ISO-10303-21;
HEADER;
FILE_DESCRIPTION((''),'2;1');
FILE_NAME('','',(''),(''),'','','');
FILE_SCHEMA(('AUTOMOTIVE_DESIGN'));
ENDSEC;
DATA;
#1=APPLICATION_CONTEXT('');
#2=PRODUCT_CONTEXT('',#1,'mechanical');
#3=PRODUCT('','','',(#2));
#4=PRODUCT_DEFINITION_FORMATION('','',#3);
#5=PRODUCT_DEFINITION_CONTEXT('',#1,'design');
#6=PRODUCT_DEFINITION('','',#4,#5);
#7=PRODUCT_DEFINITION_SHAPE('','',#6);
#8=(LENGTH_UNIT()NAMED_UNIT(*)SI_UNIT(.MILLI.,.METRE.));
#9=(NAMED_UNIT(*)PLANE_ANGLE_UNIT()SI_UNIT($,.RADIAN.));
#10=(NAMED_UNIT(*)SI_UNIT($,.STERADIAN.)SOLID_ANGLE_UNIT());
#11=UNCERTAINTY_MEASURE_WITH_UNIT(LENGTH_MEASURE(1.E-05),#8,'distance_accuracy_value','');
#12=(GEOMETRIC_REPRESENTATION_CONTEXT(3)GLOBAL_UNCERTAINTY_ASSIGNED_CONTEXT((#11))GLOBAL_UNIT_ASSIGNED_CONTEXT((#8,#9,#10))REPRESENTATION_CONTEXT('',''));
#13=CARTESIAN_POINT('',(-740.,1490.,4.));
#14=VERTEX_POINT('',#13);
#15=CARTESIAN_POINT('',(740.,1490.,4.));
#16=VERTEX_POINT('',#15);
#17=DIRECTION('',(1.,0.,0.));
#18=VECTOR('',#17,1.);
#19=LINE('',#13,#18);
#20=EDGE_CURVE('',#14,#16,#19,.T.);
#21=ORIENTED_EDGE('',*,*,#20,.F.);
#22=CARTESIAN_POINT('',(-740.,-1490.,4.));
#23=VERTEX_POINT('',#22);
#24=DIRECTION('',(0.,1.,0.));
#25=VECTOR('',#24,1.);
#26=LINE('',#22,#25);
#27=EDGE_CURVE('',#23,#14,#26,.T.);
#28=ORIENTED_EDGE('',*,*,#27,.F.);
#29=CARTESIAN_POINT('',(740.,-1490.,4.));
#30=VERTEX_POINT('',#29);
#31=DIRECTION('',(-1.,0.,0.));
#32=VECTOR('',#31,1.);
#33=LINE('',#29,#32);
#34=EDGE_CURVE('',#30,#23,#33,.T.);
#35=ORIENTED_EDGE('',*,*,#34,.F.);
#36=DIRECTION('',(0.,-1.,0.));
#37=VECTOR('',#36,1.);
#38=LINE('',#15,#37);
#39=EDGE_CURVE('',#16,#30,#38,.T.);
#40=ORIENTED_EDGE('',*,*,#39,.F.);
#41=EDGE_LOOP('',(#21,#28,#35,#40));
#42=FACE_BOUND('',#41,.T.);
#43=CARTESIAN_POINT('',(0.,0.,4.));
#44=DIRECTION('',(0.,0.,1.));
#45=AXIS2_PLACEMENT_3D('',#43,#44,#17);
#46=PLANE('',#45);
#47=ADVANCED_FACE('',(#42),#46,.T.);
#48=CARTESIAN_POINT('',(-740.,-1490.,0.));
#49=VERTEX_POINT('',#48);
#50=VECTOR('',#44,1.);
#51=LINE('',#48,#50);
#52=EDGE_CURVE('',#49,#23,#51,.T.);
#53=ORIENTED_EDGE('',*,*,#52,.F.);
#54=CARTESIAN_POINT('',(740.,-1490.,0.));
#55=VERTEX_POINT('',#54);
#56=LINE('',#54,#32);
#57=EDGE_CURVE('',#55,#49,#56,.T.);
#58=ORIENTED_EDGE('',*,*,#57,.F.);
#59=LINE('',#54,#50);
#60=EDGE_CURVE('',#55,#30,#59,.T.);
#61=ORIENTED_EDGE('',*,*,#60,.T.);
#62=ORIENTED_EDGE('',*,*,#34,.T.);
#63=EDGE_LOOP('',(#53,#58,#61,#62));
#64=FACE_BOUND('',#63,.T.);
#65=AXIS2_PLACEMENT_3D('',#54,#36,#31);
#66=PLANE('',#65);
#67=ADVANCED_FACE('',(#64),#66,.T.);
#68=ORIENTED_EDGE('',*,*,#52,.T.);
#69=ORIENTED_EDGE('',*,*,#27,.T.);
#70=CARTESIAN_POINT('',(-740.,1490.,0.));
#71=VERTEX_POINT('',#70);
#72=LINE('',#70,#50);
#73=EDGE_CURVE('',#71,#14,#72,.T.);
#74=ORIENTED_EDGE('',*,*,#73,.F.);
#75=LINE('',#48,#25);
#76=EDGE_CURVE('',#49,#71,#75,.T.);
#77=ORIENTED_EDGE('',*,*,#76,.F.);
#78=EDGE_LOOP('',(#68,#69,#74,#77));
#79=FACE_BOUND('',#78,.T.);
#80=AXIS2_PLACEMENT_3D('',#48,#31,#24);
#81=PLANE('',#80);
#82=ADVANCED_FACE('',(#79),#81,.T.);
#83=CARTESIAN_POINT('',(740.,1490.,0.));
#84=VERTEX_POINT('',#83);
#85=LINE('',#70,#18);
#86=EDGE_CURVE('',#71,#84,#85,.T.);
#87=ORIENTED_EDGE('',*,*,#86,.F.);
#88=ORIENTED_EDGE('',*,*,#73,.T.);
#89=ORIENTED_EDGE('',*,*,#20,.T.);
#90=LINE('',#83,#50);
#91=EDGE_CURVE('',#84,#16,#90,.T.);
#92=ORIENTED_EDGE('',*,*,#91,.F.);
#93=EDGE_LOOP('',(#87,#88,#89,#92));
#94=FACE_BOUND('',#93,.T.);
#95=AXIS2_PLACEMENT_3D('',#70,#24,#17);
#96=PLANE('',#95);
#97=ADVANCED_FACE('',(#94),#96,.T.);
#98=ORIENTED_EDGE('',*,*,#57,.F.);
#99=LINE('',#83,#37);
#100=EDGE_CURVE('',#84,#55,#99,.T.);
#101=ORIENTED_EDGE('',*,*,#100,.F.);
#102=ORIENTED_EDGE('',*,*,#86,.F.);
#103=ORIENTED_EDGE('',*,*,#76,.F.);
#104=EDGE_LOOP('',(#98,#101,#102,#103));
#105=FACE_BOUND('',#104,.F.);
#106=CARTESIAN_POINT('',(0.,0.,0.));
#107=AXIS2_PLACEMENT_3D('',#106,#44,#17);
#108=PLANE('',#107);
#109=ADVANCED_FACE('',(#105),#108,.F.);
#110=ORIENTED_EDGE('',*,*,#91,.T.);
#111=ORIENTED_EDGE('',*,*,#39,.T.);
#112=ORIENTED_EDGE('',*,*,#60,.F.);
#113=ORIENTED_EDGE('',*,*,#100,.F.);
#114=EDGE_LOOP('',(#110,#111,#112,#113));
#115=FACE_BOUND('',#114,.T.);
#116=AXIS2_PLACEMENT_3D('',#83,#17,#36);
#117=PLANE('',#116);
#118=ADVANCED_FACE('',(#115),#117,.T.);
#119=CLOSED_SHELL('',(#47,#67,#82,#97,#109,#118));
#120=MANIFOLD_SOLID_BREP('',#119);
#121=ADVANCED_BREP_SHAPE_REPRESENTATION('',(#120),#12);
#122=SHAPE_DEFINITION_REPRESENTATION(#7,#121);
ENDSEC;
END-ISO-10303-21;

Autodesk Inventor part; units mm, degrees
ref_plane "YZ Plane" through (0, 0, 0) normal (1, 0, 0) x (0, 1, 0)
ref_plane "XZ Plane" through (0, 0, 0) normal (0, 1, 0) x (-1, 0, 0)
ref_plane "XY Plane" through (0, 0, 0) normal (0, 0, 1) x (1, 0, 0)
sketch "Sketch1" plane through (0, 0, 0) normal (0, 0, 1) x (1, 0, 0)
  line L0 (740, -1490) -> (-740, -1490)
  line L1 (-740, -1490) -> (-740, 1490)
  line L2 (-740, 1490) -> (740, 1490)
  line L3 (740, 1490) -> (740, -1490)
  line L4 (740, -1490) -> (-740, 1490) construction
  line L5 (-740, -1490) -> (740, 1490) construction
  point P0 (0, 0)
  dimension "d0" = 1480
  dimension "d1" = 2980
extrude "Plate1" add sketch "Sketch1" along normal blind 4
sketch "Эскиз2" plane through (0, 0, 4) normal (0, 0, 1) x (1, 0, 0)
  line L0 (-500.3754, 1312.2758) -> (-500.3754, 1810.412) construction
  line L1 (-500.3754, 1810.412) -> (-460.7482, 1810.412) construction
  line L2 (-460.7482, 1810.412) -> (-460.7482, 1312.2758) construction
  line L3 (-460.7482, 1312.2758) -> (-500.3754, 1312.2758) construction
  line L4 (-689.2413, 1238) -> (-689.2413, 1335) projected
  line L5 (-689.2413, 1335) -> (-685.2413, 1335) projected
  line L6 (-189.3681, 1238) -> (-189.3681, 1335) projected
  line L7 (-189.3681, 1335) -> (-185.3681, 1335) projected
  line L8 (310.5051, 1238) -> (310.5051, 1335) projected
  line L9 (310.5051, 1335) -> (314.5051, 1335) projected
  line L10 (-689.2413, -1460.5) -> (-689.2413, -1520.5) projected
  line L11 (-689.2413, -1460.5) -> (-685.2413, -1460.5) projected
  line L12 (-189.3681, -1460.5) -> (-189.3681, -1520.5) projected
  line L13 (-189.3681, -1460.5) -> (-185.3681, -1460.5) projected
  line L14 (310.5051, -1460.5) -> (310.5051, -1520.5) projected
  line L15 (310.5051, -1460.5) -> (314.5051, -1460.5) projected
  line L16 (-709.6246, 1234.5) -> (-769.6246, 1234.5) projected
  line L17 (-709.6246, 1234.5) -> (-709.6246, 1230.5) projected
  line L18 (-709.6246, 737.8333) -> (-769.6246, 737.8333) projected
  line L19 (-709.6246, 737.8333) -> (-709.6246, 733.8333) projected
  line L20 (-709.6246, 241.1667) -> (-769.6246, 241.1667) projected
  line L21 (-709.6246, 241.1667) -> (-709.6246, 237.1667) projected
  line L22 (-709.6246, -255.5) -> (-769.6246, -255.5) projected
  line L23 (-709.6246, -255.5) -> (-709.6246, -259.5) projected
  line L24 (-709.6246, -752.1667) -> (-769.6246, -752.1667) projected
  line L25 (-709.6246, -752.1667) -> (-709.6246, -756.1667) projected
  line L26 (-709.6246, -1248.8333) -> (-769.6246, -1248.8333) projected
  line L27 (-709.6246, -1248.8333) -> (-709.6246, -1252.8333) projected
  line L28 (740, 1234.5) -> (710, 1234.5) projected
  line L29 (710, 1234.5) -> (710, 1230.5) projected
  line L30 (740, 737.8333) -> (710, 737.8333) projected
  line L31 (710, 737.8333) -> (710, 733.8333) projected
  line L32 (740, 241.1667) -> (710, 241.1667) projected
  line L33 (710, 241.1667) -> (710, 237.1667) projected
  line L34 (740, -255.5) -> (710, -255.5) projected
  line L35 (710, -255.5) -> (710, -259.5) projected
  line L36 (740, -752.1667) -> (710, -752.1667) projected
  line L37 (710, -752.1667) -> (710, -756.1667) projected
  line L38 (740, -1248.8333) -> (710, -1248.8333) projected
  line L39 (710, -1248.8333) -> (710, -1252.8333) projected
  point P0 (0, 0)
mark "Маркировка1"
equation "\"d0\" = Лист_ширина"
equation "\"d2\" = Thickness"
equation "\"BendRadius\" = Thickness"
equation "\"BendReliefWidth\" = Thickness"
equation "\"BendReliefDepth\" = 0.5 * Thickness"
equation "\"CornerReliefSize\" = 4 * Thickness"
equation "\"MinimumRemnant\" = 2 * Thickness"
equation "\"TransitionRadius\" = BendRadius"
equation "\"JacobiRadiusSize\" = BendRadius"
equation "\"GapSize\" = Thickness"
equation "\"Лист_ширина\" = 1480"
equation "\"Thickness\" = 4"
properties part number "GBK 3225 shield 5" material "Steel"
